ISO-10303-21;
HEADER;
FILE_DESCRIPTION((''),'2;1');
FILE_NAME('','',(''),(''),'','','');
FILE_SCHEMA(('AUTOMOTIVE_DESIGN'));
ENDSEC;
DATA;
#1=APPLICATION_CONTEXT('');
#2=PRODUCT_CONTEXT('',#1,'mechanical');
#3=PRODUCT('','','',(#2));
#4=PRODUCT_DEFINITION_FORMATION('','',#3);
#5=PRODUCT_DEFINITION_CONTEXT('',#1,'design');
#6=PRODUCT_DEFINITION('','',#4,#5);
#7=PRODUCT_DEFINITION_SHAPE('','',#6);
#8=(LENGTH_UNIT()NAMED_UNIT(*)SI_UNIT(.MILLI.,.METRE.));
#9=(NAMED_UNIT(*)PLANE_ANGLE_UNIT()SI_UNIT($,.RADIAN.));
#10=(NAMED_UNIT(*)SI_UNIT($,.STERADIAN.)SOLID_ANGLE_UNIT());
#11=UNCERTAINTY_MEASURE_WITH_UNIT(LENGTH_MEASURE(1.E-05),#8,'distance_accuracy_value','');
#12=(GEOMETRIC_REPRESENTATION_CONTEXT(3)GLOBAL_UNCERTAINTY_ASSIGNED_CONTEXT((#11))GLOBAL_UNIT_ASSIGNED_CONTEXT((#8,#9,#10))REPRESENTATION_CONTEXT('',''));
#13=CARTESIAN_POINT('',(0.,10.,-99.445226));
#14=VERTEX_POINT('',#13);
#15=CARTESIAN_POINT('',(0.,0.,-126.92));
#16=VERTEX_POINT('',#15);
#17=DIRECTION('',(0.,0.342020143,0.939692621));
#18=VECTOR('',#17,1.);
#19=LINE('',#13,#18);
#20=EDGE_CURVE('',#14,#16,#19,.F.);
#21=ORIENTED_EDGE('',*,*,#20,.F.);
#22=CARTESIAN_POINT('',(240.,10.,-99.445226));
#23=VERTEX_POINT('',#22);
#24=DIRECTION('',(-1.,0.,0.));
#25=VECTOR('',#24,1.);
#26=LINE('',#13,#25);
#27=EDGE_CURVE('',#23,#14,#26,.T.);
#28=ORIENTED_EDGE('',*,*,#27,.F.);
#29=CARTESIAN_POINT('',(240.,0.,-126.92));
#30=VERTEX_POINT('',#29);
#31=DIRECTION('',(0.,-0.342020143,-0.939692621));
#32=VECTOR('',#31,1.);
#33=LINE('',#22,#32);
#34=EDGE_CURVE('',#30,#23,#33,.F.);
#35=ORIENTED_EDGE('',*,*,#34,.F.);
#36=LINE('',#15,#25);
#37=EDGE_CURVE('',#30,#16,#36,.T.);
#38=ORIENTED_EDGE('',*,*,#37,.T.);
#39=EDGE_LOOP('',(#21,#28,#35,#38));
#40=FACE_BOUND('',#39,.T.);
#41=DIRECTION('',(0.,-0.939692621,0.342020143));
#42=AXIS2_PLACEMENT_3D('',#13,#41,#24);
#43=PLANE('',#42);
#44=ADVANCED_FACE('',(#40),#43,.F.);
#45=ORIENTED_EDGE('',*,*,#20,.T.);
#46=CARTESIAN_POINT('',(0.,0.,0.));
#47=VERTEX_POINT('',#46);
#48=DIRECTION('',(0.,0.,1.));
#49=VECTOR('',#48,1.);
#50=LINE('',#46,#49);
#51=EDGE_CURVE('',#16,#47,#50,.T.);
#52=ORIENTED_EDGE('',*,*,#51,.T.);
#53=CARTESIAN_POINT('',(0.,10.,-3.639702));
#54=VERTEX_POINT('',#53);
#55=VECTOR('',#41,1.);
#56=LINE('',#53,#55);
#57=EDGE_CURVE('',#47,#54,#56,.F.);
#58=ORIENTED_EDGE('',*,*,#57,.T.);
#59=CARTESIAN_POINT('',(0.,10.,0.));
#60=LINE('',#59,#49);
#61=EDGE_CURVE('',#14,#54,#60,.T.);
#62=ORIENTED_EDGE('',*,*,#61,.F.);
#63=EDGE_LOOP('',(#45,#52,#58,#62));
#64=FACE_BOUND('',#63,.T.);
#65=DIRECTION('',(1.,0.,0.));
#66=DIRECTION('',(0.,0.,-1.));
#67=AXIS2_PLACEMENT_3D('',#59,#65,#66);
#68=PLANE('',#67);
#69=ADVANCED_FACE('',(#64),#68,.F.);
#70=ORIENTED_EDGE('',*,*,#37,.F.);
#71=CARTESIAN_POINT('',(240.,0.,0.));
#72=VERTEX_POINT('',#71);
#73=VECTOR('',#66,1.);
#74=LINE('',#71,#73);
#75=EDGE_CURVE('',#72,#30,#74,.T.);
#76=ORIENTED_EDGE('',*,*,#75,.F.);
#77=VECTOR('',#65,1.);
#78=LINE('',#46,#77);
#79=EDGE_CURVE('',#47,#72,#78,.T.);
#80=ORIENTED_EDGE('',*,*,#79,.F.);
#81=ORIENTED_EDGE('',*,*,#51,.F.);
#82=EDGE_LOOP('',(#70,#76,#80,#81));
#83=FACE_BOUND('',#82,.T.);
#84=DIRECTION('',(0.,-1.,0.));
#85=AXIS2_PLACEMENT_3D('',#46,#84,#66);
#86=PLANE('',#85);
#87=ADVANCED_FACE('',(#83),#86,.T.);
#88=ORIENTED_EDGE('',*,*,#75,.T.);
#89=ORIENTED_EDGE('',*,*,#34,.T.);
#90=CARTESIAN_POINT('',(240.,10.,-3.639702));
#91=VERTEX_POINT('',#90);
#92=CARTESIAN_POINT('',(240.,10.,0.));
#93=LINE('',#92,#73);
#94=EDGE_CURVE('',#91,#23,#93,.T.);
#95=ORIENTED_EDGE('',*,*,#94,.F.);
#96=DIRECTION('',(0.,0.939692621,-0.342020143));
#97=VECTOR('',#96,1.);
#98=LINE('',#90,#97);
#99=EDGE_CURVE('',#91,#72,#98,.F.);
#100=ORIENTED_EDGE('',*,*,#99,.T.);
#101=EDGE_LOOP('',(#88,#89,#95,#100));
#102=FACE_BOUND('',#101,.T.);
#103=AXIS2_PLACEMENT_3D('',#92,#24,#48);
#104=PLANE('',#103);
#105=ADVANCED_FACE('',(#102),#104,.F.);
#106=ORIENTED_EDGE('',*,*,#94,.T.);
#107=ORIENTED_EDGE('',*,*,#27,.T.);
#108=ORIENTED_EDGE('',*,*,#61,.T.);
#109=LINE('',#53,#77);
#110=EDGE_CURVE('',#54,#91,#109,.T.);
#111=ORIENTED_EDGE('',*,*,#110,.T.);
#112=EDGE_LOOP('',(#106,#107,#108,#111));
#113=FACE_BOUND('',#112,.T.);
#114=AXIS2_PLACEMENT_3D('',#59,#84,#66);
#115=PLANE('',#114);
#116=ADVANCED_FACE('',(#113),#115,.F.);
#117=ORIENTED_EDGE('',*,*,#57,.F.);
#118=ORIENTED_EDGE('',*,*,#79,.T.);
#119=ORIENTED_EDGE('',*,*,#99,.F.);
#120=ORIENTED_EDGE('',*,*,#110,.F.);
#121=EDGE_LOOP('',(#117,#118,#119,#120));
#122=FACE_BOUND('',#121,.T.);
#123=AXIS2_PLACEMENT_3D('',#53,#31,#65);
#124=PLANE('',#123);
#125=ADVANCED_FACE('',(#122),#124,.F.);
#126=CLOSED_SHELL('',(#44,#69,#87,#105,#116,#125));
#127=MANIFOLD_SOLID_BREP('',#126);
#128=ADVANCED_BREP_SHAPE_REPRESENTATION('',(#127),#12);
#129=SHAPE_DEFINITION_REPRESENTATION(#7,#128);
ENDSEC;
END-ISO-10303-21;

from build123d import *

# Parameters (mm, degrees)
SKETCH1_W           = 240
SKETCH1_H           = 126.92
BOSS_EXTRUDE1_DEPTH = 10
CHAMFER1_SIZE2      = 27.474774195
CHAMFER1_SIZE       = 10
CHAMFER3_SIZE2      = 10
CHAMFER3_SIZE       = 3.639702343


with BuildPart() as part:
    # Sketch1 → Boss-Extrude1 (new body)
    with BuildSketch(Plane(origin=(0, 0, 0), x_dir=(1, 0, 0), z_dir=(0, 1, 0))):
        with Locations((120, 63.46)):
            Rectangle(SKETCH1_W, SKETCH1_H)
    extrude(amount=BOSS_EXTRUDE1_DEPTH)

    # Chamfer1
    chamfer1_edges = [part.edges().sort_by_distance(p)[0] for p in [
        (120, 10, -126.92),
    ]]
    chamfer1_side = [part.faces().sort_by_distance(p)[0] for p in [
        (120, 9.8, -126.92),
    ]]
    chamfer(chamfer1_edges, length=CHAMFER1_SIZE - 0.0001, length2=CHAMFER1_SIZE2 - 0.0001, reference=chamfer1_side[0])  # a hair under: the kernel refuses the full size

    # Chamfer3
    chamfer3_edges = [part.edges().sort_by_distance(p)[0] for p in [
        (120, 10, 0),
    ]]
    chamfer3_side = [part.faces().sort_by_distance(p)[0] for p in [
        (120, 10, -0.072794047),
    ]]
    chamfer(chamfer3_edges, length=CHAMFER3_SIZE - 0.0001, length2=CHAMFER3_SIZE2 - 0.0001, reference=chamfer3_side[0])  # a hair under: the kernel refuses the full size


solid = part.part
